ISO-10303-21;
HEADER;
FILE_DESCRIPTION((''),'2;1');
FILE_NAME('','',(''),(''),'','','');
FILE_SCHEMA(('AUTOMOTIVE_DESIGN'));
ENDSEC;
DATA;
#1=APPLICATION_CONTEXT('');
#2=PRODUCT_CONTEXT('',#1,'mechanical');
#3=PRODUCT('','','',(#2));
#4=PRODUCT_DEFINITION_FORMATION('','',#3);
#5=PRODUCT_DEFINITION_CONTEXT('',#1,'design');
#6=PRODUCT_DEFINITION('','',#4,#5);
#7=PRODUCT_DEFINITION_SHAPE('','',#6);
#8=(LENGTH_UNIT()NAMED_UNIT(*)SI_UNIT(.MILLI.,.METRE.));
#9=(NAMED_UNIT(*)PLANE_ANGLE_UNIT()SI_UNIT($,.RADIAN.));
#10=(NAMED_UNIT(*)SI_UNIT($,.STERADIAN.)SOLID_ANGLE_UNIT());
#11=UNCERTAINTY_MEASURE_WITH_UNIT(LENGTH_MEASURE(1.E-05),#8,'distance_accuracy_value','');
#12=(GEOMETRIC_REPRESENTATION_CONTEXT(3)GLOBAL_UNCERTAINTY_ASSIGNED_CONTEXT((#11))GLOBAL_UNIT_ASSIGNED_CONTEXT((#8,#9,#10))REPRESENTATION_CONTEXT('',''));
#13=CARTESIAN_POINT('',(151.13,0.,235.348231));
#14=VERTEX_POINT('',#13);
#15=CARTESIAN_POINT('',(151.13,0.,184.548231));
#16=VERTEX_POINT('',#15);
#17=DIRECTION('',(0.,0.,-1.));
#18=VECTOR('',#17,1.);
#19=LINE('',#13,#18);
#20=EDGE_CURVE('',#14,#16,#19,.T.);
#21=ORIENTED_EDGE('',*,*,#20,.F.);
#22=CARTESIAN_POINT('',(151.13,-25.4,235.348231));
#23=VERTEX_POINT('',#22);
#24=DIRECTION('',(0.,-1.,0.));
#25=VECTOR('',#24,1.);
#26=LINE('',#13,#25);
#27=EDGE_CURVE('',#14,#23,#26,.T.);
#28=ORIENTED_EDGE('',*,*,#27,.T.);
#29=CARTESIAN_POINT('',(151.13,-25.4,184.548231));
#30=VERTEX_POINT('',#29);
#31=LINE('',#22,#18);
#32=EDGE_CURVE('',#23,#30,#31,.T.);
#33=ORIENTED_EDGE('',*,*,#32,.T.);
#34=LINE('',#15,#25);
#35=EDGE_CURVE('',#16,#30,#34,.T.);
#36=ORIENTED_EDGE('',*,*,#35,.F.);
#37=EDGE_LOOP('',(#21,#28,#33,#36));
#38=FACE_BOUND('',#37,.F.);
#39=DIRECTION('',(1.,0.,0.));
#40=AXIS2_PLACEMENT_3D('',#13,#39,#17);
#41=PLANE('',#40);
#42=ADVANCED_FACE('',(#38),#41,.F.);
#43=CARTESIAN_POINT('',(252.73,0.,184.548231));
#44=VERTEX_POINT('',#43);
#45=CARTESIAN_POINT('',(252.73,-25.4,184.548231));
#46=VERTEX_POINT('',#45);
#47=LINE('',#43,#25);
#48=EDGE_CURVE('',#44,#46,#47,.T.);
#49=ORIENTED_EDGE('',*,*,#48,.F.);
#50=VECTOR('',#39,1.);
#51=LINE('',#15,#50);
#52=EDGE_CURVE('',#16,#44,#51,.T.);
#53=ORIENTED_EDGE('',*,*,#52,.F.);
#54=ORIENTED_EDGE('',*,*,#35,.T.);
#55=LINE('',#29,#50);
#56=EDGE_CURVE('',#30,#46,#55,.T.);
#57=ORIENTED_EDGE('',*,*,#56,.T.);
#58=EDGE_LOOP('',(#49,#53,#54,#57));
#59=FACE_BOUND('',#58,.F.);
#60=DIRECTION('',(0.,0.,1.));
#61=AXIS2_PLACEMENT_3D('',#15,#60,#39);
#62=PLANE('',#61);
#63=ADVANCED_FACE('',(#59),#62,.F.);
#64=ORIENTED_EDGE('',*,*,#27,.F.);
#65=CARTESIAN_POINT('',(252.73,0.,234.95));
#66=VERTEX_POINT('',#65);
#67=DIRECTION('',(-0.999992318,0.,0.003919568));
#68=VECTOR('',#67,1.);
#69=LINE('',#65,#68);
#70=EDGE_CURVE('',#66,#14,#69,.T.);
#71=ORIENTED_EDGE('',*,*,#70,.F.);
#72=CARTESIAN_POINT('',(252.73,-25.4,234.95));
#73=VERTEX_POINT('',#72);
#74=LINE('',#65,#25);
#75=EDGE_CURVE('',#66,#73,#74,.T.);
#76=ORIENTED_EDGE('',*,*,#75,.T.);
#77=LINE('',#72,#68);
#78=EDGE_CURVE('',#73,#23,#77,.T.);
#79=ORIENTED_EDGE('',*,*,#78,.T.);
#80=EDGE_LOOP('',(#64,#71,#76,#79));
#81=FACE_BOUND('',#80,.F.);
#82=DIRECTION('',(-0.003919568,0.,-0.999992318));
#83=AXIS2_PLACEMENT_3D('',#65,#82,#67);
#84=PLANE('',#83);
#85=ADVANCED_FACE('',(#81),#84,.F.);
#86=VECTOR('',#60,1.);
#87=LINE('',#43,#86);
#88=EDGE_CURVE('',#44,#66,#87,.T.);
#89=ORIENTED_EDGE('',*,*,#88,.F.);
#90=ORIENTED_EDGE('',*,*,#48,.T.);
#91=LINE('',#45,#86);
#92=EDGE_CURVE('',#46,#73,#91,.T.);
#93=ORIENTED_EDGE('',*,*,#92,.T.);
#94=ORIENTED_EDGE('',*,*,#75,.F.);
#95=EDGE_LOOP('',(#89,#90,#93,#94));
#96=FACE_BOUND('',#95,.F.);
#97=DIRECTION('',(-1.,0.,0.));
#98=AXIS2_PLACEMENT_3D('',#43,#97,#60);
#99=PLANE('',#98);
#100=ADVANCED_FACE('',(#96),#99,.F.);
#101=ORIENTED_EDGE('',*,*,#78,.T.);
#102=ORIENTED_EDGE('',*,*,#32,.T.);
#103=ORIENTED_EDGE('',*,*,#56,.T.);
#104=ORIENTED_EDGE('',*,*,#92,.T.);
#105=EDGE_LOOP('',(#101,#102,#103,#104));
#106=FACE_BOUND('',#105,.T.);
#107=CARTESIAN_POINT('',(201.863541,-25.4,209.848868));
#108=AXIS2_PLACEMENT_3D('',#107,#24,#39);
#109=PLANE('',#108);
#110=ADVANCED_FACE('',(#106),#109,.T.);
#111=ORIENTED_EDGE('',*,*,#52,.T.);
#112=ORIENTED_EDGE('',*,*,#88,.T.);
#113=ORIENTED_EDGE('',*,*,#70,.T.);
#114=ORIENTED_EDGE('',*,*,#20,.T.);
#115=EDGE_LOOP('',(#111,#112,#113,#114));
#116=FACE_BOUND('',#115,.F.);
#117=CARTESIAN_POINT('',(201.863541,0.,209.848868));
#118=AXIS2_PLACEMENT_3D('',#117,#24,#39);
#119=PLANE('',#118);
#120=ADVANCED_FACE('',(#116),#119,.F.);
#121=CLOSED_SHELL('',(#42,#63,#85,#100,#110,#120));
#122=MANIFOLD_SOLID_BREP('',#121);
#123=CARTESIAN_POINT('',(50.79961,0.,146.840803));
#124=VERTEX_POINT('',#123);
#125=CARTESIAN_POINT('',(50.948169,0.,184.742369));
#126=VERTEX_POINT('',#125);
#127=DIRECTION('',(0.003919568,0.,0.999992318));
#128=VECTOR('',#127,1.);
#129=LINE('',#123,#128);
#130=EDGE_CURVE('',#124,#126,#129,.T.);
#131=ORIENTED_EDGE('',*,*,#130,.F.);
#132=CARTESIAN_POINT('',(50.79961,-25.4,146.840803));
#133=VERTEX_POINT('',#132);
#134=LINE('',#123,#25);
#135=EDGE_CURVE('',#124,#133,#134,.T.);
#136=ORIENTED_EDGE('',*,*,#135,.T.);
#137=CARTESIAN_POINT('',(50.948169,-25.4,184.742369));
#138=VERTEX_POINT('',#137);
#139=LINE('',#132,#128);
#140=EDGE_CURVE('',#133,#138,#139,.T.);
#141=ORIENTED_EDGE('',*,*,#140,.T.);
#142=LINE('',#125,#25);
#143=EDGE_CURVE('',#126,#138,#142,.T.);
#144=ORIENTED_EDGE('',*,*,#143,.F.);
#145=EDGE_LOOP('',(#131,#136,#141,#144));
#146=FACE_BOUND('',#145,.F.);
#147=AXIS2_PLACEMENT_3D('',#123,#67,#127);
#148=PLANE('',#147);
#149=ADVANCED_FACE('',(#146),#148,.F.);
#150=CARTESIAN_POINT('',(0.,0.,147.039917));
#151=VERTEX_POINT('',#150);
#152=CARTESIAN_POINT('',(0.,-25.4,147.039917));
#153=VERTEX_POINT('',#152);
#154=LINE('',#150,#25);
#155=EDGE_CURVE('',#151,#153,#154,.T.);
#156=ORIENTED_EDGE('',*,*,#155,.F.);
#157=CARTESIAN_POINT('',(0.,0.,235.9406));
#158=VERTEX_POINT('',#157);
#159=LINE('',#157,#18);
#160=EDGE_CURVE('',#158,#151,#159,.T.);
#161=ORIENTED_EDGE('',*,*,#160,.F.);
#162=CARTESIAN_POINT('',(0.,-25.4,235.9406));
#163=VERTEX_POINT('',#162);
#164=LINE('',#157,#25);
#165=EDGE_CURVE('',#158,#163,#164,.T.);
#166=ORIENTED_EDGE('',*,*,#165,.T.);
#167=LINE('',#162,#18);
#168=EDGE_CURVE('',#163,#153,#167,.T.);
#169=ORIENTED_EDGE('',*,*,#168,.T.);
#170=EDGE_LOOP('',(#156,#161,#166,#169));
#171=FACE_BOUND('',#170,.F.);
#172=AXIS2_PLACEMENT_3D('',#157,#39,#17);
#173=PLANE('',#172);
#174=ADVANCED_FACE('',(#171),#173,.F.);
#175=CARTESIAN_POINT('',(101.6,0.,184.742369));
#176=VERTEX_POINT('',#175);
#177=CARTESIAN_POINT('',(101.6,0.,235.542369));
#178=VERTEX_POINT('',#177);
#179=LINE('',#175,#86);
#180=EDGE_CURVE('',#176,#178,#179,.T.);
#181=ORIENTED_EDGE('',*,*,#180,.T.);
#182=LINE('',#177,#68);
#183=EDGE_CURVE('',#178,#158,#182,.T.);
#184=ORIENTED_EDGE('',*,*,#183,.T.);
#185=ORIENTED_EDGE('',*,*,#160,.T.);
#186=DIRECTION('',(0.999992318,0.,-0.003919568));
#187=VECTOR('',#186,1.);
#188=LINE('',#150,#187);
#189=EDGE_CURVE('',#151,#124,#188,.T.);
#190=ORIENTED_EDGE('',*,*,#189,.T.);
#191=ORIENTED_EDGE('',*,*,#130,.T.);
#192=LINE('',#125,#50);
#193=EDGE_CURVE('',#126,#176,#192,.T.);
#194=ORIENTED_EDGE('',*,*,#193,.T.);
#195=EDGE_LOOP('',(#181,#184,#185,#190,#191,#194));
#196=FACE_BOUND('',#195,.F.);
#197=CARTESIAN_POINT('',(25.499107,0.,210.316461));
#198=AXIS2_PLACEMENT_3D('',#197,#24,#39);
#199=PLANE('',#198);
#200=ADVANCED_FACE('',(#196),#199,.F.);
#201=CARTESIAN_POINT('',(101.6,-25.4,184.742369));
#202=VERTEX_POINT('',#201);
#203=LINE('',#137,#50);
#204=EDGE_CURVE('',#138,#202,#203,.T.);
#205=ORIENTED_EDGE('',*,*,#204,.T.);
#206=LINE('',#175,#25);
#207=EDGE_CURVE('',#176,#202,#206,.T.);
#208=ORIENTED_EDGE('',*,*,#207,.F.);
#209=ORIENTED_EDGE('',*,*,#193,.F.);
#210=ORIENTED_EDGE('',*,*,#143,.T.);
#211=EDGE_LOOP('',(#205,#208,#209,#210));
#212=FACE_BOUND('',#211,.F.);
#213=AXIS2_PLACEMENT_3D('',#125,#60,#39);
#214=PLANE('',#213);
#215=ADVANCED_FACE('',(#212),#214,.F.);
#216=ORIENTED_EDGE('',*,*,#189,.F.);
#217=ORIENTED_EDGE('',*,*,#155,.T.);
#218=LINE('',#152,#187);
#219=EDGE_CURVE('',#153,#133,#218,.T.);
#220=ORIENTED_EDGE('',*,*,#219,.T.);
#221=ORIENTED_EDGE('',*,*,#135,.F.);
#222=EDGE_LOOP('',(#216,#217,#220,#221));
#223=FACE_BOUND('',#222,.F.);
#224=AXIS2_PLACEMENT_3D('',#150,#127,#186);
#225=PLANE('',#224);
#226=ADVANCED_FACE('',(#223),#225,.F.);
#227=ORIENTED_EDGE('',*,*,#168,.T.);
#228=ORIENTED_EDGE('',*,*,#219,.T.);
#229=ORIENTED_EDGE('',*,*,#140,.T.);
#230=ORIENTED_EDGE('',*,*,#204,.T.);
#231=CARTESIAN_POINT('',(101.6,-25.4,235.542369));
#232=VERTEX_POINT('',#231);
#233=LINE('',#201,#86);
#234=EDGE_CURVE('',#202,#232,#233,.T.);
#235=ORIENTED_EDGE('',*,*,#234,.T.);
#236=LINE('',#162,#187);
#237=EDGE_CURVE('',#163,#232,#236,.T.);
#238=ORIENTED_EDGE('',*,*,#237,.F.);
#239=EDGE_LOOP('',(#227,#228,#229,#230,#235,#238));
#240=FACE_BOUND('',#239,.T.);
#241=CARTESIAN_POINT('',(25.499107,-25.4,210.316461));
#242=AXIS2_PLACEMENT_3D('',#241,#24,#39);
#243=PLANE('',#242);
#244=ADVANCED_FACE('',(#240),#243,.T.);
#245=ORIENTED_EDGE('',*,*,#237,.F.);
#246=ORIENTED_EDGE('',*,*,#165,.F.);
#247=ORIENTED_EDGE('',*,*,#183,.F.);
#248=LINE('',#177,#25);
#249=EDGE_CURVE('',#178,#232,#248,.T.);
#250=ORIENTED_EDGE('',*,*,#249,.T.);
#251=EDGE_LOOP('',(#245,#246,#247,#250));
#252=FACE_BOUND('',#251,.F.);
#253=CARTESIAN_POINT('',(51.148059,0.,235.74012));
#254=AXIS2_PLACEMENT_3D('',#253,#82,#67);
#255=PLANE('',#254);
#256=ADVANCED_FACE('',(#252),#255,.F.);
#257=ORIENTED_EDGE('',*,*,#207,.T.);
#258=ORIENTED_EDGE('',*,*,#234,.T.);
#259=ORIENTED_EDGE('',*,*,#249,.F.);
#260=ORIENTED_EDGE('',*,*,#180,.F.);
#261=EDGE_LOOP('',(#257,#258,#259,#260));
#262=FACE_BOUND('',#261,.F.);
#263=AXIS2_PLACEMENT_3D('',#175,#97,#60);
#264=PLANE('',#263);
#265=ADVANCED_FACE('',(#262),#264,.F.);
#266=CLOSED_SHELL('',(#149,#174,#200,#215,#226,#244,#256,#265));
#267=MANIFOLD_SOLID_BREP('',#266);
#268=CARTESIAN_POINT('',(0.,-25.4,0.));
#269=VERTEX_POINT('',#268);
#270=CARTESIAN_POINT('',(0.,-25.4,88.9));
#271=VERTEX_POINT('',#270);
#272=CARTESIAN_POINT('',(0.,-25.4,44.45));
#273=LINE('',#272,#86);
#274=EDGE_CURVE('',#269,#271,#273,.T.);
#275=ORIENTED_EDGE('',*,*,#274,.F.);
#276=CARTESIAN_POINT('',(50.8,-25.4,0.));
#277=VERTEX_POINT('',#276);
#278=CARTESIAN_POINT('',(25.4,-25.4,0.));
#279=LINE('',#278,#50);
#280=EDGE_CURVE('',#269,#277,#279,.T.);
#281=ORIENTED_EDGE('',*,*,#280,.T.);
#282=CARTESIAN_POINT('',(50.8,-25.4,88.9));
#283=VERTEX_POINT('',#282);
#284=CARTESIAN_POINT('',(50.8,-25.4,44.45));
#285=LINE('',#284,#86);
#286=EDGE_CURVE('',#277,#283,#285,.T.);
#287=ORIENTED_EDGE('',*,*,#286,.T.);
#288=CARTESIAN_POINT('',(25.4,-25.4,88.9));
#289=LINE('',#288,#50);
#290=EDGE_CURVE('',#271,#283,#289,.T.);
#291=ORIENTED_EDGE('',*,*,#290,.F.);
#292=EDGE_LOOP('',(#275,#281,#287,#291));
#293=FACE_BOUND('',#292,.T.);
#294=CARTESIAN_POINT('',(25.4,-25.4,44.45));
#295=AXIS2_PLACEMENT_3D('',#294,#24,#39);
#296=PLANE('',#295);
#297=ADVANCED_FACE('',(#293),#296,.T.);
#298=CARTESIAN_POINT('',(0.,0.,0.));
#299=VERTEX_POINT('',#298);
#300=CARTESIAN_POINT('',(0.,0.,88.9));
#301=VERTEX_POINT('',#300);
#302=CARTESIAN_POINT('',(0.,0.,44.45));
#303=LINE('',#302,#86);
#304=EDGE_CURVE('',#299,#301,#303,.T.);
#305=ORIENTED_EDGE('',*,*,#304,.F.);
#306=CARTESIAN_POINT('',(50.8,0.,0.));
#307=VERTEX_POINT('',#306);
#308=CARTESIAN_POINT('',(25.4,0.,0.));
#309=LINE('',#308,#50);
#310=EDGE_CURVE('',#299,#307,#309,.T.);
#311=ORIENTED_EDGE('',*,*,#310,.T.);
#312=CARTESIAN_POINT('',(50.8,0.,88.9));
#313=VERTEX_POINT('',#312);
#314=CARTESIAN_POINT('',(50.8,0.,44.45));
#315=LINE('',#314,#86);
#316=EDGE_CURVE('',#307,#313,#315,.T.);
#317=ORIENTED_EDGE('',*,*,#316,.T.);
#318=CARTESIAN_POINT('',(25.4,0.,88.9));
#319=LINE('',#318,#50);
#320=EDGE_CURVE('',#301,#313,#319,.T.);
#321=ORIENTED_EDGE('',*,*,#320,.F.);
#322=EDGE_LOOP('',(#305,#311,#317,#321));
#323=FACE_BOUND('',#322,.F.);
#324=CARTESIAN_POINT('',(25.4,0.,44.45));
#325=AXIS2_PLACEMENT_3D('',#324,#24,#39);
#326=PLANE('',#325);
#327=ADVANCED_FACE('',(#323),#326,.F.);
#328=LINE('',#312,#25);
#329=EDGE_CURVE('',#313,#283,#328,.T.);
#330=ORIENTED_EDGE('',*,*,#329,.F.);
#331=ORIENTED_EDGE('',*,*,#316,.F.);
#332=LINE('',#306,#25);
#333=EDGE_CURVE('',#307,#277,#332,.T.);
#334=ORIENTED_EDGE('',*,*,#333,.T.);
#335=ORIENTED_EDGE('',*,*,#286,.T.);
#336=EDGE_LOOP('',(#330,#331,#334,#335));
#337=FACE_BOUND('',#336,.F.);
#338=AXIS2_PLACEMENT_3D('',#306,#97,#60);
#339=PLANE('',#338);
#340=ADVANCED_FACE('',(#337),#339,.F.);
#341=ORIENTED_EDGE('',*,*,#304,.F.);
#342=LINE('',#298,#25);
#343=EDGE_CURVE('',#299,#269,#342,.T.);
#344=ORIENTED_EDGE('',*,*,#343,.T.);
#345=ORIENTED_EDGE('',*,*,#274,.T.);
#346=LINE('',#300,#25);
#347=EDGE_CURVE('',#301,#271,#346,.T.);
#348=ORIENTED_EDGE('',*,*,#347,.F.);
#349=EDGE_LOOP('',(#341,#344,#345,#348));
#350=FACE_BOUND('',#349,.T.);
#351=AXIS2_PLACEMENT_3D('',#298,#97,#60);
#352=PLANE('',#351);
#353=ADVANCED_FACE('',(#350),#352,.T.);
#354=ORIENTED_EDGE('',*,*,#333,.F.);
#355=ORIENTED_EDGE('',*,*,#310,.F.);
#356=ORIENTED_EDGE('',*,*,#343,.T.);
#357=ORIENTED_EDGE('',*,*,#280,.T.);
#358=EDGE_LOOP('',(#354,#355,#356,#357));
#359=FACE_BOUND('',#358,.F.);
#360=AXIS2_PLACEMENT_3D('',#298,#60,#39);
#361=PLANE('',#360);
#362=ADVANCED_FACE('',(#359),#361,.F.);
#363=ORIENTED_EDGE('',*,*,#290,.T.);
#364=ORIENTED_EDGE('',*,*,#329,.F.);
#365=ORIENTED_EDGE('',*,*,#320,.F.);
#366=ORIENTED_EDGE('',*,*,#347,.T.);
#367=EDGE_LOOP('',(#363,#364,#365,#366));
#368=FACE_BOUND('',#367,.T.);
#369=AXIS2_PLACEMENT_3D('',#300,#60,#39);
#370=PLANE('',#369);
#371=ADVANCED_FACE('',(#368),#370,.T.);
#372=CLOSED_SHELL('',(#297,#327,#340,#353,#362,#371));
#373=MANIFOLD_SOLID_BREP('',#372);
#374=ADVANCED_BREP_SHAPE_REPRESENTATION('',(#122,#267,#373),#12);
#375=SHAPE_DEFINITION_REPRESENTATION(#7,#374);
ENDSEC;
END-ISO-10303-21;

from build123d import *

# Parameters (mm, degrees)
F1_DEPTH = 25.4
F0_W     = 50.8
F0_H     = 88.9
F2_DEPTH = 25.4
F3_DEPTH = 25.4


# Not quite as in the source:
# - the program builds the solid bodies; features that only make, move or delete a surface that nothing else refers to are left out


with BuildPart() as f1:
    # F0 (on Front) → F1 (new body)
    with BuildSketch(Plane.XZ):
        Polygon((151.13, 184.5482311558), (252.73, 184.5482311558), (252.73, 234.95), (151.13, 235.3482311558), align=None)
    extrude(amount=F1_DEPTH)


with BuildPart() as f1b:
    # F0 (on Front) → F1, piece 2 (new body)
    with BuildSketch(Plane.XZ):
        Polygon((51.1480593626, 235.7401201693), (50.9481686791, 184.7423688442), (101.6, 184.7423688442), (101.6, 235.5423688442), align=None)
    extrude(amount=F1_DEPTH)

    # F0 (on Front) → F3 (join)
    with BuildSketch(Plane.XZ):
        Polygon((0, 235.9406), (0, 184.7423688442), (50.9481686791, 184.7423688442), (51.1480593626, 235.7401201693), align=None)
        Polygon((0, 184.7423688442), (0, 147.0399171062), (50.799609778, 146.8408030579), (50.9481686791, 184.7423688442), align=None)
    extrude(amount=F3_DEPTH)


with BuildPart() as f2:
    # F0 (on Front) → F2 (new body)
    with BuildSketch(Plane.XZ):
        with Locations((25.4, 44.45)):
            Rectangle(F0_W, F0_H)
    extrude(amount=F2_DEPTH)


solid = Compound([f1.part, f1b.part, f2.part])
